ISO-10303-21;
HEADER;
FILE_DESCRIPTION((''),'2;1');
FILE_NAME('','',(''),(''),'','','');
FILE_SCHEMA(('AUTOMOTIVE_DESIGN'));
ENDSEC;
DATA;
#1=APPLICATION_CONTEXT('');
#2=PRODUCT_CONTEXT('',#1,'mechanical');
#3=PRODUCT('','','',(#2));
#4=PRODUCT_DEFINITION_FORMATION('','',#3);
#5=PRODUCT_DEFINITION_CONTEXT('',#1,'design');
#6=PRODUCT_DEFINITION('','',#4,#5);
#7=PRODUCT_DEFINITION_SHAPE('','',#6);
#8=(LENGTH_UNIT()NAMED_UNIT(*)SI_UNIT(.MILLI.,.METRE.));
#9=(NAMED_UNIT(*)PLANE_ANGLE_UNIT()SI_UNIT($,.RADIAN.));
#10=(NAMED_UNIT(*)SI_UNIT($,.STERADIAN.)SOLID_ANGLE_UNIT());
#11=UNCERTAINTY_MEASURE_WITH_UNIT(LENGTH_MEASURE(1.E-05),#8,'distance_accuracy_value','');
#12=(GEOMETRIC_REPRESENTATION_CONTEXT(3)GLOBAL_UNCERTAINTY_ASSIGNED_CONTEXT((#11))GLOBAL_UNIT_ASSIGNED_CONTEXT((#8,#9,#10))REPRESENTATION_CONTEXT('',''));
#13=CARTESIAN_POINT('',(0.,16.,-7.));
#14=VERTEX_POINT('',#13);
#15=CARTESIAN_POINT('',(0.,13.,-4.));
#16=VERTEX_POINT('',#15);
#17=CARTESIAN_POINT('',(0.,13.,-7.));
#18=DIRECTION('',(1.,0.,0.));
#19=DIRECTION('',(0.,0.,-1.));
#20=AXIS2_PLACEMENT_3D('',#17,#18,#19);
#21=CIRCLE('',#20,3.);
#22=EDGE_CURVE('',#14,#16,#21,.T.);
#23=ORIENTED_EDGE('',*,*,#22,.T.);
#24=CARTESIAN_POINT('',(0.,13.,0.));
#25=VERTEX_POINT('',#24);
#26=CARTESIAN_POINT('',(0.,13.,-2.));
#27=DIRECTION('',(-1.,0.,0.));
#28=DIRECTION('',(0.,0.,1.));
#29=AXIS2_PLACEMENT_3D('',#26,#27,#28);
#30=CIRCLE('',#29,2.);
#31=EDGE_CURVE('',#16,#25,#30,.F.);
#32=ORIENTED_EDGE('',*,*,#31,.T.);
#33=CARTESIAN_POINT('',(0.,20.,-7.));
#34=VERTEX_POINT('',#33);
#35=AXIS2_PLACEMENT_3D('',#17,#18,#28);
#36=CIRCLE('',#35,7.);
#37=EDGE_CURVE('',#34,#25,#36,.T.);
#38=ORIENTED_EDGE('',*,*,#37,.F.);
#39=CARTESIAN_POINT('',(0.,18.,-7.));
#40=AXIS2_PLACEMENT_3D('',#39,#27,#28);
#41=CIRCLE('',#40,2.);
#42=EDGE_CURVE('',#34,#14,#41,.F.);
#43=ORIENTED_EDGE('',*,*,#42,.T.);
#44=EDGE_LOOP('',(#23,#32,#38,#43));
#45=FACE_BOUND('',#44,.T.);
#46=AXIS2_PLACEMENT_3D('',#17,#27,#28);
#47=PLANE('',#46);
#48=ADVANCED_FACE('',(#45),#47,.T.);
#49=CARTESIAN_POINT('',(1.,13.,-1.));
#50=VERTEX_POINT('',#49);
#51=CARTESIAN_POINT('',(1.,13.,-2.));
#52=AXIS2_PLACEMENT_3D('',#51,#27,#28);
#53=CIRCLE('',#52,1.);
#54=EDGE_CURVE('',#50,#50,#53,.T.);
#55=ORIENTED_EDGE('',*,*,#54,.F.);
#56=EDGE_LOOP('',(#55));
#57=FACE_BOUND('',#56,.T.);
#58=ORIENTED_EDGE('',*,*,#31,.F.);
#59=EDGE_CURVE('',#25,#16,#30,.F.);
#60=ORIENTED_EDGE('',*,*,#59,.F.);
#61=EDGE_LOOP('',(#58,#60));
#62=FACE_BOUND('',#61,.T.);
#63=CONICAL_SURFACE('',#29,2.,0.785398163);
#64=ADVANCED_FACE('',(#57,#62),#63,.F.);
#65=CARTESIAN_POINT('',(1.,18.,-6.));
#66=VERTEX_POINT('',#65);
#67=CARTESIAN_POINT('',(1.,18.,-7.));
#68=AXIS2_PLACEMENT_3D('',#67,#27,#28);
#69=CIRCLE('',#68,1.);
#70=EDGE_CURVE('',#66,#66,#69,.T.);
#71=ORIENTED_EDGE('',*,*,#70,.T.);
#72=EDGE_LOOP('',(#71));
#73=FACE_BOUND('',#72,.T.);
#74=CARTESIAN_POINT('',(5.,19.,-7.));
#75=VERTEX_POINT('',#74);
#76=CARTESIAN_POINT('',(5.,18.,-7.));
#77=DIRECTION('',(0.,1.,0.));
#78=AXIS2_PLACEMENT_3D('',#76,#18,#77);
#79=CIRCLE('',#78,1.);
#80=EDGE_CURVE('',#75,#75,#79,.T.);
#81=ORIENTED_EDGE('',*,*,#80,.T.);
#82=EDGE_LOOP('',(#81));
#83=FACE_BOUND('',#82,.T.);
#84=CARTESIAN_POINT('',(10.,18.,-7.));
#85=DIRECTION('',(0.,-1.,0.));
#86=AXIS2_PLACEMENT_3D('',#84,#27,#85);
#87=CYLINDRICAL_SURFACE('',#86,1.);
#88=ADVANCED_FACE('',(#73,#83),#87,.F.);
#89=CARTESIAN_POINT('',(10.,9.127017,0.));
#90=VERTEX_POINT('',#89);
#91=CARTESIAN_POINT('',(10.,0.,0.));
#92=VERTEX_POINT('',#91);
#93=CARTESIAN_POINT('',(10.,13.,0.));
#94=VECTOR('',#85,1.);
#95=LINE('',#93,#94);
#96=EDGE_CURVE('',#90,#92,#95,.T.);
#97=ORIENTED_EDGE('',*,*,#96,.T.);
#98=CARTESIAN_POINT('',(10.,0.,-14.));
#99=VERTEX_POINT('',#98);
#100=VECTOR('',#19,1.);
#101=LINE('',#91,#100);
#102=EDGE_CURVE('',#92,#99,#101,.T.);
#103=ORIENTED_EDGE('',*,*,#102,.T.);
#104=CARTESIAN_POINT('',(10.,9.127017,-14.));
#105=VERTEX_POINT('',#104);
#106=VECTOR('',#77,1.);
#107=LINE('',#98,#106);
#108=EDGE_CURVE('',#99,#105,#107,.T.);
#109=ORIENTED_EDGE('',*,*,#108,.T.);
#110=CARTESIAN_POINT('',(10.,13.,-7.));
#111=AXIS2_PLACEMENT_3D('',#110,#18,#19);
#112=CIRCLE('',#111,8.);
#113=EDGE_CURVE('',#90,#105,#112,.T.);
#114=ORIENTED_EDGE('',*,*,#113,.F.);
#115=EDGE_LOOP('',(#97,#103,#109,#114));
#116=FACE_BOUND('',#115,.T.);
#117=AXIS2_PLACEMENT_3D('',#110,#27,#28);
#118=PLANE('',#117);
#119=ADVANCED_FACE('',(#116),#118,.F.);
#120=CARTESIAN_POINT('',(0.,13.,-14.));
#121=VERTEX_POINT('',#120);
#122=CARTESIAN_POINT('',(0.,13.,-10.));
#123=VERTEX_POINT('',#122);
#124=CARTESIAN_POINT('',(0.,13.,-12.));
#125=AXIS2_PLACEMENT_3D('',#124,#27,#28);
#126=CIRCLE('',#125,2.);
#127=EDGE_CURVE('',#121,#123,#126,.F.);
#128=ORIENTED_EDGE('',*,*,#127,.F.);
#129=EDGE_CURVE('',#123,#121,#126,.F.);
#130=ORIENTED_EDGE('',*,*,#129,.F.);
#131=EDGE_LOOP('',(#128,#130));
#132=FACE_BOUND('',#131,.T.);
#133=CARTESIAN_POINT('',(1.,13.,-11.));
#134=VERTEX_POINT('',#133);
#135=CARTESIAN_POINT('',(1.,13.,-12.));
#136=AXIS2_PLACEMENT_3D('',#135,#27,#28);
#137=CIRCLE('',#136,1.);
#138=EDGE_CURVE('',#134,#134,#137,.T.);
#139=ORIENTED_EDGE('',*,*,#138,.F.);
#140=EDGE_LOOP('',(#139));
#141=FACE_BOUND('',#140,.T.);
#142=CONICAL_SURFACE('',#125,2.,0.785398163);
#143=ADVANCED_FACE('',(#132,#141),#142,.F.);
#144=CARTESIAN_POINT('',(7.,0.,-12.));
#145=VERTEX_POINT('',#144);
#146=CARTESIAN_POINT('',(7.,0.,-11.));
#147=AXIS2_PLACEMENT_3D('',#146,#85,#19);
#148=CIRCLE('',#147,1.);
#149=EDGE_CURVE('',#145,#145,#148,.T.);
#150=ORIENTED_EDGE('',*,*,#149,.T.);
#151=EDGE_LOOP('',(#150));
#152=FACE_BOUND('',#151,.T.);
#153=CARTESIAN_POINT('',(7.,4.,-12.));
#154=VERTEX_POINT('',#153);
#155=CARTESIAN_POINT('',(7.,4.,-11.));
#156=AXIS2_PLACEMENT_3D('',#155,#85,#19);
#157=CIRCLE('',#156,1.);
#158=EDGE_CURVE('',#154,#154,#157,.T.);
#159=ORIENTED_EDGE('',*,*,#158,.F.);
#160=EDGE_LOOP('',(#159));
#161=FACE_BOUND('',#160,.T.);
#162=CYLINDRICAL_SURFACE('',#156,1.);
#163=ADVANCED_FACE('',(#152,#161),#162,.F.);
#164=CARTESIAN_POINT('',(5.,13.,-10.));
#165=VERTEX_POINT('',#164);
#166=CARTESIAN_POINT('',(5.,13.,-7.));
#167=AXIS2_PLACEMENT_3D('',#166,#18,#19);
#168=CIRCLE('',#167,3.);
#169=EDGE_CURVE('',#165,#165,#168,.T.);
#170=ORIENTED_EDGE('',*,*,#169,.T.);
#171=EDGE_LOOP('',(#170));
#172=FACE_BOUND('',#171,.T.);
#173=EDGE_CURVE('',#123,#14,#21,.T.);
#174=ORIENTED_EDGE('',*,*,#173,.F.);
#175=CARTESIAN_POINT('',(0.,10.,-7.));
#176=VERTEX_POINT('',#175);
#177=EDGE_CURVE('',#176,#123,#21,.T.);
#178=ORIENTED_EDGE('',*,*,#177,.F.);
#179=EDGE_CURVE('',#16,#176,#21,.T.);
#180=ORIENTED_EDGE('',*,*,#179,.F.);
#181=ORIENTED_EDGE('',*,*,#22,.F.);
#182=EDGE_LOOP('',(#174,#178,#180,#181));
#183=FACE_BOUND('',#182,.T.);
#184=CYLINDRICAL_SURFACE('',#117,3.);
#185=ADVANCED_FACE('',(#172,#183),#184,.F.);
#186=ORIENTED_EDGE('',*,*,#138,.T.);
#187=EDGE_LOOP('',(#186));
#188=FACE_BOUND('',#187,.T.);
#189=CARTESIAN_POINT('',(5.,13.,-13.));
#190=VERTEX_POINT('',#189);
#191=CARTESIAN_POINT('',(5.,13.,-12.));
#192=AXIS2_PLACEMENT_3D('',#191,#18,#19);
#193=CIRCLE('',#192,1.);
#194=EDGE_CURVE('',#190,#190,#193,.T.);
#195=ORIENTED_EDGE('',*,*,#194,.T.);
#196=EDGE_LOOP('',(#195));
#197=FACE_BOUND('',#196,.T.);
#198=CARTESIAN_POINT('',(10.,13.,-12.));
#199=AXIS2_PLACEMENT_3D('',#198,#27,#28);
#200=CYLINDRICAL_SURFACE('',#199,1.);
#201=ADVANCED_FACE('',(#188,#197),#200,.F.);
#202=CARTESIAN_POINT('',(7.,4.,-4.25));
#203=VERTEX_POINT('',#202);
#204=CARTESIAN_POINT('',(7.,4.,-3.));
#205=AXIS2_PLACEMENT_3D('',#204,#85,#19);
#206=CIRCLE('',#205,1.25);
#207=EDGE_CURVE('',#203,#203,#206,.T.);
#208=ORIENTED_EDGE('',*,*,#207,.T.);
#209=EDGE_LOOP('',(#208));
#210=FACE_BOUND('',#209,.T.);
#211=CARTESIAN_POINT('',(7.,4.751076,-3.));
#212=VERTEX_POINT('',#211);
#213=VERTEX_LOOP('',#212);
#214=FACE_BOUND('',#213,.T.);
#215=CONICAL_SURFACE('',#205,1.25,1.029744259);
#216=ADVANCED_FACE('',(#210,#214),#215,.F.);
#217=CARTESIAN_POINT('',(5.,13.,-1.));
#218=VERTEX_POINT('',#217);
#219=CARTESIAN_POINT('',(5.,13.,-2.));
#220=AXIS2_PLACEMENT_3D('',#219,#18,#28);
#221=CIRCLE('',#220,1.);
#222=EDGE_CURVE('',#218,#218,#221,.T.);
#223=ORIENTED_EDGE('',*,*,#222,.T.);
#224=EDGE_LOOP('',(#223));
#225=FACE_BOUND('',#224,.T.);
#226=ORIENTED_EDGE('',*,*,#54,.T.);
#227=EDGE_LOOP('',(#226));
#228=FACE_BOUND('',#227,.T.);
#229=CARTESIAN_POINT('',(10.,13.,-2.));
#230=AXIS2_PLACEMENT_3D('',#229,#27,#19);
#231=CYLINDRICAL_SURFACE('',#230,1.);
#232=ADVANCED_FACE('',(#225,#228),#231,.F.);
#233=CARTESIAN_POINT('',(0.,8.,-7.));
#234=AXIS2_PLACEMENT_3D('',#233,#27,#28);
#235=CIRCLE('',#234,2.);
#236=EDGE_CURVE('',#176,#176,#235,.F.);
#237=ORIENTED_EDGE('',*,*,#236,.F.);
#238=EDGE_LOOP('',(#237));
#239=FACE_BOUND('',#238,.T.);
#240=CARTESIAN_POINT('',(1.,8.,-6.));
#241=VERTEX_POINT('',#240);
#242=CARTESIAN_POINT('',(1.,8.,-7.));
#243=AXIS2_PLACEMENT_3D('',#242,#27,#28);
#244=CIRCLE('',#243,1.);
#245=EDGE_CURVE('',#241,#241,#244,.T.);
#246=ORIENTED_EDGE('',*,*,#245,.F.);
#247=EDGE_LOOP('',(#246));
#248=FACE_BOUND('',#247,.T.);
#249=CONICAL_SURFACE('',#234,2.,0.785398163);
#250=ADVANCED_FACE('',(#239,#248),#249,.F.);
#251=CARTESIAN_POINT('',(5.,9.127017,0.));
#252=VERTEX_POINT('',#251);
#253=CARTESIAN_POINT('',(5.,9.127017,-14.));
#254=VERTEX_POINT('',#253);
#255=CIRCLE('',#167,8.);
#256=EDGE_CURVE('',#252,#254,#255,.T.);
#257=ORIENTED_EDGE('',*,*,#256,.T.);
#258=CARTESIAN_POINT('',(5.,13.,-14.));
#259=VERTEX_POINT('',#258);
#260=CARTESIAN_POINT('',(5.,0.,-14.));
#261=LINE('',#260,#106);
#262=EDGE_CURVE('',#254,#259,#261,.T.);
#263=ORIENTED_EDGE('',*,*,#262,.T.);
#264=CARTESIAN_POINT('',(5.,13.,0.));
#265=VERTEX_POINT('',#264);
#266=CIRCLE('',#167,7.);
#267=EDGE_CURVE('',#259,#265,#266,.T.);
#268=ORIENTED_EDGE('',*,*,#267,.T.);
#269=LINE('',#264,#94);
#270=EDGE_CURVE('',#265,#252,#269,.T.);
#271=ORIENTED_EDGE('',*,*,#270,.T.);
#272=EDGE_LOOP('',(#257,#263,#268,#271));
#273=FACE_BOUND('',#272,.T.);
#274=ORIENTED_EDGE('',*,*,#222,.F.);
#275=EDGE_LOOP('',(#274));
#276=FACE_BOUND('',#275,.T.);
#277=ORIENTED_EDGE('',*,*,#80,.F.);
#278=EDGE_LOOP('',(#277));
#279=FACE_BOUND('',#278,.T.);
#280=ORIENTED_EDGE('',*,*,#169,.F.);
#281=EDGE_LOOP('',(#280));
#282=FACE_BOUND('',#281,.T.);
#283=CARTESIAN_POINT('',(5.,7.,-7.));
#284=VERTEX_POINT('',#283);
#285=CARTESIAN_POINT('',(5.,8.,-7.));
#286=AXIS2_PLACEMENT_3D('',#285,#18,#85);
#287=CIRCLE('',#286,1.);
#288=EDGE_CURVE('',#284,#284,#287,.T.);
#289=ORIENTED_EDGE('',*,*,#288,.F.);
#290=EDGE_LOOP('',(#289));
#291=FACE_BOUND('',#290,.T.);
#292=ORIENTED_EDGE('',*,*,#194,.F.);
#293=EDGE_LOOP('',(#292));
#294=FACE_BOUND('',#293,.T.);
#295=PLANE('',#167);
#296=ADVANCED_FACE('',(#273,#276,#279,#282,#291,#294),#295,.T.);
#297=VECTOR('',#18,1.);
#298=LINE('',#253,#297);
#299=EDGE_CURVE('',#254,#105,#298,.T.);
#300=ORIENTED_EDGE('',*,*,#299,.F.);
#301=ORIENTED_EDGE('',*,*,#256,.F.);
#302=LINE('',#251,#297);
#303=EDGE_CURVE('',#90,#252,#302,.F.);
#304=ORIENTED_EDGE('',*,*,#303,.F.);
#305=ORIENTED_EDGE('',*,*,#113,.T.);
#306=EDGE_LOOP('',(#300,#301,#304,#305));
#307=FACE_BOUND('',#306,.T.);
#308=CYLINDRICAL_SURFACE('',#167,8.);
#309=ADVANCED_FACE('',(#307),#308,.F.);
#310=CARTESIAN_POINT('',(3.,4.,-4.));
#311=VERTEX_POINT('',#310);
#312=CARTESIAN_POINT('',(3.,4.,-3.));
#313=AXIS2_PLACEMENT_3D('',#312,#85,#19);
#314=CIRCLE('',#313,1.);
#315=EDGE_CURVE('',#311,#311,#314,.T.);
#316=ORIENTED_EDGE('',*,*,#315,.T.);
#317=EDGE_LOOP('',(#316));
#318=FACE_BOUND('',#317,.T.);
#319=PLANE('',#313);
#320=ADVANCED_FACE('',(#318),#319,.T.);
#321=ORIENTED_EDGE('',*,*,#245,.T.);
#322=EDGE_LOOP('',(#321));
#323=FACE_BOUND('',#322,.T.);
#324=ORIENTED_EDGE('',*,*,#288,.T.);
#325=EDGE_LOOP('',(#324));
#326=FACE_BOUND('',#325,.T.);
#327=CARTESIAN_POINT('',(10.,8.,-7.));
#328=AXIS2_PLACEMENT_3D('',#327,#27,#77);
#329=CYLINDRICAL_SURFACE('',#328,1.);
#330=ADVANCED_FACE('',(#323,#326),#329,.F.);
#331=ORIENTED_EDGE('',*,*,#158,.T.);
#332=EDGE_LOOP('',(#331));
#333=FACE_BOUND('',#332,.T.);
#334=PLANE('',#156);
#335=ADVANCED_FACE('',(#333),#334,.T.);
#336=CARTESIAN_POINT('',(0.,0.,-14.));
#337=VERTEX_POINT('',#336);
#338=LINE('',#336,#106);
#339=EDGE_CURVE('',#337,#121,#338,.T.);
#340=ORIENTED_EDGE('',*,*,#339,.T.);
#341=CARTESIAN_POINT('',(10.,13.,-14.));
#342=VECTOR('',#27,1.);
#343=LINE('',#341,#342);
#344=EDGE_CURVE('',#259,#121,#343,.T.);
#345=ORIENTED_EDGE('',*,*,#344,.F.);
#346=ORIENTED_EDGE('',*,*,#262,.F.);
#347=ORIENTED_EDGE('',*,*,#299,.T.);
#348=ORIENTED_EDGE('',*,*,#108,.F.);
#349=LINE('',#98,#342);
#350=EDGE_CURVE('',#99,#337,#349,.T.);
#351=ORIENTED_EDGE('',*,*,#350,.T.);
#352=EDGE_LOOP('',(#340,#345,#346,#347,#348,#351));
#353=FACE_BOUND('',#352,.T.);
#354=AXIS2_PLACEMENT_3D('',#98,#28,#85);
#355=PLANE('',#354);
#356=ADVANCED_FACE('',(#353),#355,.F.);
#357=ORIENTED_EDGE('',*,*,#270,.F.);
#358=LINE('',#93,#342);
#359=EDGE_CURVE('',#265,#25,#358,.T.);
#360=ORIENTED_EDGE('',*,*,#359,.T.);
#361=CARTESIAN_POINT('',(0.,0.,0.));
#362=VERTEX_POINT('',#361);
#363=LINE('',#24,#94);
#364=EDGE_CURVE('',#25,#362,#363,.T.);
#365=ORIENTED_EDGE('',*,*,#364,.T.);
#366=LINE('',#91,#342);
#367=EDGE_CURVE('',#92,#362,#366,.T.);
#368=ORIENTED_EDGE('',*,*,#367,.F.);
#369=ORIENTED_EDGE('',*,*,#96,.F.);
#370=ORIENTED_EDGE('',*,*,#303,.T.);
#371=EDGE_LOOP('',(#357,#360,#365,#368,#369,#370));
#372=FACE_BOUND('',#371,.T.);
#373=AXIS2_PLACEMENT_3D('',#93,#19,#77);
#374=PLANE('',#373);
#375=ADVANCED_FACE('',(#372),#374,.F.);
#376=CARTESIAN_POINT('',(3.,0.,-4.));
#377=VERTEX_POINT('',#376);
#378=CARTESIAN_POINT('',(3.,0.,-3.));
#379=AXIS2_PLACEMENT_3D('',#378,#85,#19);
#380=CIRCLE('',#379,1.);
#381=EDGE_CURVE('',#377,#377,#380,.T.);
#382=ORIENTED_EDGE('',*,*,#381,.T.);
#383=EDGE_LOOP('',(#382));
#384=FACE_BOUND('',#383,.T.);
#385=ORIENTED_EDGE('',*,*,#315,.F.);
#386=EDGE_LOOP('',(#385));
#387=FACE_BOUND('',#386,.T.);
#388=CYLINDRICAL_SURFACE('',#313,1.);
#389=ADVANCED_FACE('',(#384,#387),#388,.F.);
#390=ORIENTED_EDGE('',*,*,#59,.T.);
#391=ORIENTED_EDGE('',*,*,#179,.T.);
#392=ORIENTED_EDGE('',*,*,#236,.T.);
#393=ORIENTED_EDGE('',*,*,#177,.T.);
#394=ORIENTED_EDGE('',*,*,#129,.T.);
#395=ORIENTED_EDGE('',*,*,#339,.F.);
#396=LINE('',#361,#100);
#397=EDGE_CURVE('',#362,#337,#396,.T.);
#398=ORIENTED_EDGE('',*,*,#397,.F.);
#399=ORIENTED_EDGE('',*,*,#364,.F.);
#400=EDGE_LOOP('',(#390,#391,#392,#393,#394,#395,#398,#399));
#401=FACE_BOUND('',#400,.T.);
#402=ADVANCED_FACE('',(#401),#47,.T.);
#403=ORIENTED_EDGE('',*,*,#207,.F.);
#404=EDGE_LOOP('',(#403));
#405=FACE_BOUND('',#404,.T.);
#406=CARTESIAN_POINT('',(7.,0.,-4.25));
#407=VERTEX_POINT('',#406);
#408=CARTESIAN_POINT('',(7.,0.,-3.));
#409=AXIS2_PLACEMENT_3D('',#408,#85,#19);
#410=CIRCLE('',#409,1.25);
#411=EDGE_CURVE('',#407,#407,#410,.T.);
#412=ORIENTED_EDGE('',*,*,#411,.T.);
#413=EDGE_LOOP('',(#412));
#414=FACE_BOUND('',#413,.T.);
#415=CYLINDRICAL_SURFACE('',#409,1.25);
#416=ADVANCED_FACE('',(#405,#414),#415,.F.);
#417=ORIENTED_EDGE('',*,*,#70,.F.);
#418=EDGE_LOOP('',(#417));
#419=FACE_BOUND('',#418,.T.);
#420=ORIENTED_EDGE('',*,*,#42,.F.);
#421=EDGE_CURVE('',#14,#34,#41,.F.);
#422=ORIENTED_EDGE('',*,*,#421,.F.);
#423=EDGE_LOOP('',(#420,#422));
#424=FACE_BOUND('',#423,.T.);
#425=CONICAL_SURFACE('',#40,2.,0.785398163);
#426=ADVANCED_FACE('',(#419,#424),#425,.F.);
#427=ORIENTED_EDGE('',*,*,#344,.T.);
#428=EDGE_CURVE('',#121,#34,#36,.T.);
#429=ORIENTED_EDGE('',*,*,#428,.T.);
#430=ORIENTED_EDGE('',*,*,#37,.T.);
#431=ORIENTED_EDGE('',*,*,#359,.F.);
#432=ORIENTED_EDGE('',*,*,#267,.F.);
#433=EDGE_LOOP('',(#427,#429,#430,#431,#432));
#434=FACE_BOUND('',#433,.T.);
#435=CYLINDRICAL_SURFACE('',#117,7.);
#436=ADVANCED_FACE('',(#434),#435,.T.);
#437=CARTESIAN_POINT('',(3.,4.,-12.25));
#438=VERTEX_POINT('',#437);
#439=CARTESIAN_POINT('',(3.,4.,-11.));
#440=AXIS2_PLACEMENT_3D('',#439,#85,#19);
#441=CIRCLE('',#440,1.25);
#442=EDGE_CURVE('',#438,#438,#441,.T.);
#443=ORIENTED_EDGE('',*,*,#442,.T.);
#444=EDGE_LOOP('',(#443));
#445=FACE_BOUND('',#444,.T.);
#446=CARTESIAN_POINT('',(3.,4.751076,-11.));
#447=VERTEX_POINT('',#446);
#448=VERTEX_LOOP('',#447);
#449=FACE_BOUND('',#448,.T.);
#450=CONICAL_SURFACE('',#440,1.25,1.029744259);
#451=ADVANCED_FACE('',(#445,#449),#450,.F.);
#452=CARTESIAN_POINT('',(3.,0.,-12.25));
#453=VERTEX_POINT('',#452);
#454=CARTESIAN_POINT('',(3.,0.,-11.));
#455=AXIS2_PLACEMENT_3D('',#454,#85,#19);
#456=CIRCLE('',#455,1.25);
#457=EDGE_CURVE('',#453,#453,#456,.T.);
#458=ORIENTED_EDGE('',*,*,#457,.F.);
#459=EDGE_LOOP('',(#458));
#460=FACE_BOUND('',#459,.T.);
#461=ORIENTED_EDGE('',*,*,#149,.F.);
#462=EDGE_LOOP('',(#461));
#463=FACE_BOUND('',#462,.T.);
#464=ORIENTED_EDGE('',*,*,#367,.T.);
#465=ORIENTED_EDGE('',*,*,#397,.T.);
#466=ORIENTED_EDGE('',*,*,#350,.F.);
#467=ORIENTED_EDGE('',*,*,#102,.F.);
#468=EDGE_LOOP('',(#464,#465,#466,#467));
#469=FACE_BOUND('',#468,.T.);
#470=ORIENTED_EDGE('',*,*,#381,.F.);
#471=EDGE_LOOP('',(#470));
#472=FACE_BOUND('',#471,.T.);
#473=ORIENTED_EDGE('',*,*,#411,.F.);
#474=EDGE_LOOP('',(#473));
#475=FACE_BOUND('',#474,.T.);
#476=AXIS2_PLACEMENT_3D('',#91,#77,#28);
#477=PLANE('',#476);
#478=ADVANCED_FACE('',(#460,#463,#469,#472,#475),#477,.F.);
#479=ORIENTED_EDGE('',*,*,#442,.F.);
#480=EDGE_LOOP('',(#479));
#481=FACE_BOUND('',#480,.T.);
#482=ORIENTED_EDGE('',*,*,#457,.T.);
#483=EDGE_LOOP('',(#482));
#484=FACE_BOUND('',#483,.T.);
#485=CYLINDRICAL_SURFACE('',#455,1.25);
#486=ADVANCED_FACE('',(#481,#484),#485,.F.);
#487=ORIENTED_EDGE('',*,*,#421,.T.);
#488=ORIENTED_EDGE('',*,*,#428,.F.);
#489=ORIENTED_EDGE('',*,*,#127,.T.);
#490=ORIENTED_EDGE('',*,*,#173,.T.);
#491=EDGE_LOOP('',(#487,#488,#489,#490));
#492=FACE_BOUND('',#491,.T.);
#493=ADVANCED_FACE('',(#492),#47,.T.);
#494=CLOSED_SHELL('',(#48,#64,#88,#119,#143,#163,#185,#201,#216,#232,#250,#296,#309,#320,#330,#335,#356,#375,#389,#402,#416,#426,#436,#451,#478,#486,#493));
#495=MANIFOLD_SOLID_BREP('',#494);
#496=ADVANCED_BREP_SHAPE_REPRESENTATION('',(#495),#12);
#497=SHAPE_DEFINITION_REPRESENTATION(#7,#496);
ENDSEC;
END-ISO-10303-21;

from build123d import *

# Parameters (mm, degrees)
SKETCH1_R                       = 3
SKETCH1_R_2                     = 1
BOSS_EXTRUDE1_DEPTH             = 10
SKETCH2_R                       = 8
CUT_EXTRUDE1_DEPTH              = 5
CIRPATTERN1_OUTLINE_R           = 1
CIRPATTERN1_DEPTH               = 5
TAP_DRILL_FOR_M3X0_5_TAP1_D     = 2.5
TAP_DRILL_FOR_M3X0_5_TAP1_DEPTH = 4
TAP_DRILL_FOR_M3X0_5_TAP1_TIP   = 0.751075774
SKETCH5_R                       = 1
CUT_EXTRUDE2_DEPTH              = 4
CHAMFER1_SIZE                   = 1


# Read off the part's stored shape, not the designer's step: CirPattern1
with BuildPart() as part:
    # Sketch1 → Boss-Extrude1 (new body)
    with BuildSketch(Plane(origin=(0, 0, 0), x_dir=(0, 0, -1), z_dir=(1, 0, 0))):
        with BuildLine():
            Line((0, 13), (0, 0))
            Line((0, 0), (14, 0))
            Line((14, 0), (14, 13))
            ThreePointArc((14, 13), (7, 20), (0, 13))
        make_face()
        with Locations((7, 13)):
            Circle(SKETCH1_R, mode=Mode.SUBTRACT)
        with Locations((12, 13)):
            Circle(SKETCH1_R_2, mode=Mode.SUBTRACT)
    extrude(amount=BOSS_EXTRUDE1_DEPTH)

    # Sketch2 → Cut-Extrude1 (cut)
    with BuildSketch(Plane(origin=(10, 0, 0), x_dir=(0, 0, -1), z_dir=(1, 0, 0))):
        with Locations((7, 13)):
            Circle(SKETCH2_R)
    extrude(amount=-CUT_EXTRUDE1_DEPTH, mode=Mode.SUBTRACT)

    # CirPattern1 outline → CirPattern1 (cut)
    with BuildSketch(Plane.YZ):
        with Locations((8, -7)):
            Circle(CIRPATTERN1_OUTLINE_R)
        with Locations((13, -2)):
            Circle(CIRPATTERN1_OUTLINE_R)
        with Locations((18, -7)):
            Circle(CIRPATTERN1_OUTLINE_R)
    extrude(amount=CIRPATTERN1_DEPTH, mode=Mode.SUBTRACT)

    # Tap Drill for M3x0.5 Tap1
    with Locations(Plane(origin=(0, 0, 0), x_dir=(-1, 0, 0), z_dir=(0, -1, 0))):
        with Locations((-3, 11), (-7, 3)):
            Hole(TAP_DRILL_FOR_M3X0_5_TAP1_D / 2, depth=TAP_DRILL_FOR_M3X0_5_TAP1_DEPTH)
            with Locations((0, 0, -(TAP_DRILL_FOR_M3X0_5_TAP1_DEPTH + TAP_DRILL_FOR_M3X0_5_TAP1_TIP / 2))):  # 118° drill point
                Cone(0, TAP_DRILL_FOR_M3X0_5_TAP1_D / 2, TAP_DRILL_FOR_M3X0_5_TAP1_TIP, mode=Mode.SUBTRACT)

    # Sketch5 → Cut-Extrude2 (cut)
    with BuildSketch(Plane.XZ):
        with Locations(Location((3, -3, 0), (0, 0, 270))):
            Circle(SKETCH5_R)
        with Locations(Location((7, -11, 0), (0, 0, 270))):
            Circle(SKETCH5_R)
    extrude(amount=-CUT_EXTRUDE2_DEPTH, mode=Mode.SUBTRACT)

    # Chamfer1
    chamfer1_edges = [part.edges().sort_by_distance(p)[0] for p in [
        (0, 13, -11),
        (0, 17, -7),
        (0, 12, -2),
        (0, 7, -7),
    ]]
    chamfer(chamfer1_edges, length=CHAMFER1_SIZE - 0.0001)  # a hair under: the kernel refuses the full size


solid = part.part
